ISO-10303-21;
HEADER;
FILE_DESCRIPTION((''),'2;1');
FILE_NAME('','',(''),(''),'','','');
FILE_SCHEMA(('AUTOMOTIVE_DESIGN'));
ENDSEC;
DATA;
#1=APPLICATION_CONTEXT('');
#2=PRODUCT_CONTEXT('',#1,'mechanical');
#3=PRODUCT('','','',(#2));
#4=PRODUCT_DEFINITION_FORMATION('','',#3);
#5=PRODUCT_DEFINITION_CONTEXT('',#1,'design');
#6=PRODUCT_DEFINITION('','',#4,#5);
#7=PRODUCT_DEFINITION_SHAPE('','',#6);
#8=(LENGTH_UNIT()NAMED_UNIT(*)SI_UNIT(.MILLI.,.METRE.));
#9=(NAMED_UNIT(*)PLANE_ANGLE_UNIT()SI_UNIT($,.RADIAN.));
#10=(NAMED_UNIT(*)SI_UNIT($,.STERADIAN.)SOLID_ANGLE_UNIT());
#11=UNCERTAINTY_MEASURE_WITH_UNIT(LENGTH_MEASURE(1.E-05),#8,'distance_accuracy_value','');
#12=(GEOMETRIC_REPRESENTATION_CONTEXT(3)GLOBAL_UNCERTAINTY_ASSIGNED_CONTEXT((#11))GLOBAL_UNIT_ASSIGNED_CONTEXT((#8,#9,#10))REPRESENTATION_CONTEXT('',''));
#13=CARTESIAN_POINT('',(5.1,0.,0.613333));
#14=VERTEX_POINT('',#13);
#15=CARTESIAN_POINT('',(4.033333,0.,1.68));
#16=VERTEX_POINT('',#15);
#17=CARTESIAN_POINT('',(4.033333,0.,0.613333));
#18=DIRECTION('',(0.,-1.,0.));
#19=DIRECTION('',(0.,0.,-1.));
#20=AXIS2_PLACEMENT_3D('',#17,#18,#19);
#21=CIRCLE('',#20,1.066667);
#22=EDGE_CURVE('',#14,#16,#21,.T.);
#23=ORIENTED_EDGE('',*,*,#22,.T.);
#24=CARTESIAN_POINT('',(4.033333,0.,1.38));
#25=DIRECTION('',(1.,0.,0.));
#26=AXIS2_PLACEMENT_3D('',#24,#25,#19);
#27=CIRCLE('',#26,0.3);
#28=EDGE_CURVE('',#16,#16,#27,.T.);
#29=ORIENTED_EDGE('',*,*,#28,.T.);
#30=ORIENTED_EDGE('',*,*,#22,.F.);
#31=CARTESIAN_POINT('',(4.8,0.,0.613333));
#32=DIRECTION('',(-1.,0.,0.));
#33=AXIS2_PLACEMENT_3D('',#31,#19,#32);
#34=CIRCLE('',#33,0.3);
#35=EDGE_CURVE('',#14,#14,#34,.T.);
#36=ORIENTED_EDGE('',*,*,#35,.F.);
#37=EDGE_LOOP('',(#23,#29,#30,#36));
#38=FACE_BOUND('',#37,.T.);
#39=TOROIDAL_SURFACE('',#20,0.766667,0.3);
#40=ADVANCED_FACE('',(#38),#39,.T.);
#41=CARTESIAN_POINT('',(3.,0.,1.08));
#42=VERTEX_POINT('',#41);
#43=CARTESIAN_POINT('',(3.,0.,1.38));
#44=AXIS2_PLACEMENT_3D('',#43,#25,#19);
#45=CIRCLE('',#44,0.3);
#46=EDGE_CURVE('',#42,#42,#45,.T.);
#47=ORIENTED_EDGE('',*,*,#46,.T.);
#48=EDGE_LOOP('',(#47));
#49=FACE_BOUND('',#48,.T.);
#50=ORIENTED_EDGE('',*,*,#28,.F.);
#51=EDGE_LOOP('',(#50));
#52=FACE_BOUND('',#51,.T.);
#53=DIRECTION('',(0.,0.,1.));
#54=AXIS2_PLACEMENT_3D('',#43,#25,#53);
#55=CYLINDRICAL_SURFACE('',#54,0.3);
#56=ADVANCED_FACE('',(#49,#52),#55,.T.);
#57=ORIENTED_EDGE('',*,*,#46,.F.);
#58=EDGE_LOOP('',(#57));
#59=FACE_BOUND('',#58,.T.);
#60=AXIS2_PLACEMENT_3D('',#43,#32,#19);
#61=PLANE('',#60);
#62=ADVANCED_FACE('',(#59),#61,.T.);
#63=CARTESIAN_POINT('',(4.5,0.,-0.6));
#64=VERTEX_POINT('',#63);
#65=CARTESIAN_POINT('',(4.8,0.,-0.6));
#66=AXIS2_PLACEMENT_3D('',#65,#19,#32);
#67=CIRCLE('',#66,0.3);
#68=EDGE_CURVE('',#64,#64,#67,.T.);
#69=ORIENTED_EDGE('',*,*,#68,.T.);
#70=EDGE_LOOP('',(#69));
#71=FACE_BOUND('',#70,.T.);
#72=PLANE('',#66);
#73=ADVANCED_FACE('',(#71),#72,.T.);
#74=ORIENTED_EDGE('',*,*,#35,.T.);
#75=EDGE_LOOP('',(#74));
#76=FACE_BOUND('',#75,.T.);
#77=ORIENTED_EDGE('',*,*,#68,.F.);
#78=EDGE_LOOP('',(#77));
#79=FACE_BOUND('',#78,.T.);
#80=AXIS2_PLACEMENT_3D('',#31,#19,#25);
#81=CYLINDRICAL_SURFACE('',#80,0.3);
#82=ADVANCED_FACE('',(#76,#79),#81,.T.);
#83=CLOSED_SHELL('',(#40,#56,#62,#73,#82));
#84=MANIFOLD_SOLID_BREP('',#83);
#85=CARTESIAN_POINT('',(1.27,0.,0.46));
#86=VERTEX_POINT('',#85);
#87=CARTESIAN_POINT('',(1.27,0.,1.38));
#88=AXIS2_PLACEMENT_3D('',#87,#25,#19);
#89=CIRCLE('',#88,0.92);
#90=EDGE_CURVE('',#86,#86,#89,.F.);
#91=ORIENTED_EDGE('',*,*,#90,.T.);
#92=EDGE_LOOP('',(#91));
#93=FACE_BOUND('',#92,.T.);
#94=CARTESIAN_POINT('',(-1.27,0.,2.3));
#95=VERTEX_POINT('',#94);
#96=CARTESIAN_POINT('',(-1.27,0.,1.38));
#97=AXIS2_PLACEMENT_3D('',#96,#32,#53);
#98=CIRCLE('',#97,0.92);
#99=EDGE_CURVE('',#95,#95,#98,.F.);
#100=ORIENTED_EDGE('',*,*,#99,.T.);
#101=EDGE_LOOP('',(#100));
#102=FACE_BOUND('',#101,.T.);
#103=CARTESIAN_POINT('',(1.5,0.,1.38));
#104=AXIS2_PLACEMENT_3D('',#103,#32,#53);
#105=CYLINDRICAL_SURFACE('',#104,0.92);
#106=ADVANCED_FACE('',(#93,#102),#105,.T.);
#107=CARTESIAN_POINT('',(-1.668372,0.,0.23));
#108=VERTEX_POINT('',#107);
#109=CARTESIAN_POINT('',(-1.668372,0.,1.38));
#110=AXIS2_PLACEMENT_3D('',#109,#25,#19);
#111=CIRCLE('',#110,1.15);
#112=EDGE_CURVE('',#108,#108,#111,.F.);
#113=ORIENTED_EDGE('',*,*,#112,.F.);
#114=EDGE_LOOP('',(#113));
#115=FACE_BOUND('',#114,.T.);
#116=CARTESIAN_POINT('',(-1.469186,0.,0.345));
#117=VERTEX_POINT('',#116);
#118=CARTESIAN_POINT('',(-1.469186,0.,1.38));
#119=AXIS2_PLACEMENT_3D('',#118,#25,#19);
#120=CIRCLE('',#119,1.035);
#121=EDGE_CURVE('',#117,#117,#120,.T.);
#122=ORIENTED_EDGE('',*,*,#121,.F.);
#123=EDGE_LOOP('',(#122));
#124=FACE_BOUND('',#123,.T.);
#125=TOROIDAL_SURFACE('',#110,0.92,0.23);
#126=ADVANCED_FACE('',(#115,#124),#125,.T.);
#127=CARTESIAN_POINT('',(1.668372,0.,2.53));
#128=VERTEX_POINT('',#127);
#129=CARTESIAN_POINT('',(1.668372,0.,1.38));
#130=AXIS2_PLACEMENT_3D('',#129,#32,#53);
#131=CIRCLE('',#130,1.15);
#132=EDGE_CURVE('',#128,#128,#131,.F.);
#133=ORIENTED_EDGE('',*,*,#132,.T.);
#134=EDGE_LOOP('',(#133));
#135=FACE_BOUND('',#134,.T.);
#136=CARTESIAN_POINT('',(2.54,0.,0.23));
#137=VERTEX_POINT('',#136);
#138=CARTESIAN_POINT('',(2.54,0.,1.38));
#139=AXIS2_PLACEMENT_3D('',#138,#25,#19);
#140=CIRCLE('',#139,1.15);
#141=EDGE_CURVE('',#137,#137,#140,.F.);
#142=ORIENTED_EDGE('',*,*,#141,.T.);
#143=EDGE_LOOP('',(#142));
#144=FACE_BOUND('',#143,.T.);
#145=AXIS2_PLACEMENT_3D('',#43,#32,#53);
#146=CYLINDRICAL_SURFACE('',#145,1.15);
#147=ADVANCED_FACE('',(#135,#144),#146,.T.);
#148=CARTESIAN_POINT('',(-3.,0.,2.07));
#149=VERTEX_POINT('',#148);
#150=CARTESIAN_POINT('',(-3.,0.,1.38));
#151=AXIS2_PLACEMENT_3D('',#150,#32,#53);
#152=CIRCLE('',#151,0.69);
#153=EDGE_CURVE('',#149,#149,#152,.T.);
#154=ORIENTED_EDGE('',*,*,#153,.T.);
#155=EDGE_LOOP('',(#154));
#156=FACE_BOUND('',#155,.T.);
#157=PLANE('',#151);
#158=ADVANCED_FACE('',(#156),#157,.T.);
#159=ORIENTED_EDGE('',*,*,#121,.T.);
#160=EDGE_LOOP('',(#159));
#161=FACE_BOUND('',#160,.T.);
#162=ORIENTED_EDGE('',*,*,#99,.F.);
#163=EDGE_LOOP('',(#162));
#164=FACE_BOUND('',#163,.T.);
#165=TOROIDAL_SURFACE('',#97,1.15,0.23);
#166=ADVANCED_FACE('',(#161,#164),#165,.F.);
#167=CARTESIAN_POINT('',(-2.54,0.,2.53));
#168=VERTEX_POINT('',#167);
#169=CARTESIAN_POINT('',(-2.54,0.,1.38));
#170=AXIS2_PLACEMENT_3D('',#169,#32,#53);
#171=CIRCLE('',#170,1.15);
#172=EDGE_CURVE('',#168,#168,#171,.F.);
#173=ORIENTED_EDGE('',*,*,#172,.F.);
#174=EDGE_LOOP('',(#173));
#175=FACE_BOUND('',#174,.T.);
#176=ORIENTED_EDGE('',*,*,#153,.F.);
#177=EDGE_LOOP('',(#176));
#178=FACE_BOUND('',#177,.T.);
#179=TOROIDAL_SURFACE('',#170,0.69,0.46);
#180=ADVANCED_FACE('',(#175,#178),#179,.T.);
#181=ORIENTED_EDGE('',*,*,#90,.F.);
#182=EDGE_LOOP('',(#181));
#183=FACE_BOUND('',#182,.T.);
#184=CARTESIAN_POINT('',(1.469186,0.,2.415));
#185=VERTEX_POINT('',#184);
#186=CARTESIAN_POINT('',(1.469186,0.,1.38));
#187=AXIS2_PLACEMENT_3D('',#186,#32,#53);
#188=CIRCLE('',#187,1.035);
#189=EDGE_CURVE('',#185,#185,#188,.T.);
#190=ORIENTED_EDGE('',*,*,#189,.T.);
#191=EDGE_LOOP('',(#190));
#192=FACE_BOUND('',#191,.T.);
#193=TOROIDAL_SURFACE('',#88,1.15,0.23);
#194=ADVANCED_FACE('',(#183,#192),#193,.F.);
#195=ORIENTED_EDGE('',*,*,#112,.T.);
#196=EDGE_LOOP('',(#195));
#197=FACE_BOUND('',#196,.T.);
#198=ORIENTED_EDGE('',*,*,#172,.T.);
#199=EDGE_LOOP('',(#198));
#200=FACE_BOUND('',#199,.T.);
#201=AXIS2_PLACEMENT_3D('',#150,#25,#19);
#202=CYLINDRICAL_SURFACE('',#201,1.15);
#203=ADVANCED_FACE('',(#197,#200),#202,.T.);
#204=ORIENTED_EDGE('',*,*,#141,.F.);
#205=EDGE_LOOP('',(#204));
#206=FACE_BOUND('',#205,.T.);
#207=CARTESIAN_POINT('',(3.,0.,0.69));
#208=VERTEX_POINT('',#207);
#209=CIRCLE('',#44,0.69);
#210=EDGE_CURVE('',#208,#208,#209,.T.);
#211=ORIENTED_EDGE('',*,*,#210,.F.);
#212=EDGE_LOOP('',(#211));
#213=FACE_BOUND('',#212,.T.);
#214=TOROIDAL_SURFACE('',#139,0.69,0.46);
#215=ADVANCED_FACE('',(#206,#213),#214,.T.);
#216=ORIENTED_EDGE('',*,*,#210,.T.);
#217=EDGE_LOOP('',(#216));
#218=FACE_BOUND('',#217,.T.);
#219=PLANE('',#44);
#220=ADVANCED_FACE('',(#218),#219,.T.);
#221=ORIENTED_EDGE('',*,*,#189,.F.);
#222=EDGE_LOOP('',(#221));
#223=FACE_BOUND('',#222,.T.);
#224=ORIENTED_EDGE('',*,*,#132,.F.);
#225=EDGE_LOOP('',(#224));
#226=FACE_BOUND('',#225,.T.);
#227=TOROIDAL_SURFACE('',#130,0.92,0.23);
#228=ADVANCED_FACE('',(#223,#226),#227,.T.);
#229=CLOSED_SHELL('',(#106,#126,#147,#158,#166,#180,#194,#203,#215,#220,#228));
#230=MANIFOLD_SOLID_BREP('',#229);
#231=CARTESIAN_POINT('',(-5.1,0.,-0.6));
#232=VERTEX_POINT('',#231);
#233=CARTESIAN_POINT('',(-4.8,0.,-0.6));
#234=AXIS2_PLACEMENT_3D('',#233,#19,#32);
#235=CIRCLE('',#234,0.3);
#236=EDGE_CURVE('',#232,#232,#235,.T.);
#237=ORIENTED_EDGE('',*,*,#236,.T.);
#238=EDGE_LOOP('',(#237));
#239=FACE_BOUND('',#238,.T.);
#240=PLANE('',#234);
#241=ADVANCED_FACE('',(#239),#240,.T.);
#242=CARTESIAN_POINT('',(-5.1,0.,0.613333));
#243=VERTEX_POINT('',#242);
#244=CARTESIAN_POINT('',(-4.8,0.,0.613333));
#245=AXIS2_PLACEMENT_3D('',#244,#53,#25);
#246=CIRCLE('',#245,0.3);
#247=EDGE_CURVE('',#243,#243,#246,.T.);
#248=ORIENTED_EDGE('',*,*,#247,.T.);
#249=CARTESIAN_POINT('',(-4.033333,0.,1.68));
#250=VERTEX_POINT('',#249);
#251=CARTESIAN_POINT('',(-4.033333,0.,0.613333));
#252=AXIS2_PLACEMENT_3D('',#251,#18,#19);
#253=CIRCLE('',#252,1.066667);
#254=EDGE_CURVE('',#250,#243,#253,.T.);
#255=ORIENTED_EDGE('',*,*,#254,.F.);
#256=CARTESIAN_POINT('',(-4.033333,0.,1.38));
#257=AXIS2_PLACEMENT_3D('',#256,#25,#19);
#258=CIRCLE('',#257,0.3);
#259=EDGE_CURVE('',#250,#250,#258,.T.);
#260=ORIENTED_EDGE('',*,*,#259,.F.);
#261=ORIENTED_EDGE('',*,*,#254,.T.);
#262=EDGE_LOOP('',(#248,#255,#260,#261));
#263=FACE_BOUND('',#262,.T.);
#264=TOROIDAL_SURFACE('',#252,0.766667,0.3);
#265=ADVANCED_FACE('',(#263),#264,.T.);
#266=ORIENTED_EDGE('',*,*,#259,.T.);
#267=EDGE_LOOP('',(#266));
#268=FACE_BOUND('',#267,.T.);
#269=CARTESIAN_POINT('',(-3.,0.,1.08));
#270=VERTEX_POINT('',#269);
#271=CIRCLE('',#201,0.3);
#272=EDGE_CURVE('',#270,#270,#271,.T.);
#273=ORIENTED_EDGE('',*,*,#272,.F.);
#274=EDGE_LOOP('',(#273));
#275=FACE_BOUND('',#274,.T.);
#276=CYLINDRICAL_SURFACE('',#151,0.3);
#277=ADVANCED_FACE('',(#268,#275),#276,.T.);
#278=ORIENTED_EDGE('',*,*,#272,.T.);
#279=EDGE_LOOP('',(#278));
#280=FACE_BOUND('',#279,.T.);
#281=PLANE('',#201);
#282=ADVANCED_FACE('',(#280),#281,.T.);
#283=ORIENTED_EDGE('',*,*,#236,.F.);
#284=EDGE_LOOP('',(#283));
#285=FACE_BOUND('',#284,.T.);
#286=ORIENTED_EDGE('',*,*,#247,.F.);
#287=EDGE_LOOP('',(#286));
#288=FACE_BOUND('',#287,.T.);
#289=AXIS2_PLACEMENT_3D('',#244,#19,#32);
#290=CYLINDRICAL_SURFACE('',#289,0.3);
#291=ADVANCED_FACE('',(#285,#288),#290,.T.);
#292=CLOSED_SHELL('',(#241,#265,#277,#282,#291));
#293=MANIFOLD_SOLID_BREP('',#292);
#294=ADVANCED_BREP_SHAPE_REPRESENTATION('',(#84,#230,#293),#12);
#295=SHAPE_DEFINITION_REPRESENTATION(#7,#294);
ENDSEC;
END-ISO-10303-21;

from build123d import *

# Parameters (mm, degrees)
EXTRUDE_START   = -1.5
SKETCH_3_R      = 0.92
EXTRUDE_1_DEPTH = 3
SKETCH_5_R      = 1.15
EXTRUDE_2_DEPTH = 1.5
EXTRUDE_START_2 = 1.5
SKETCH_7_R      = 1.15
EXTRUDE_3_DEPTH = 1.5
FILLET_1_R      = 0.46
FILLET_3_R      = 0.23
FILLET_4_R      = 0.23
SKETCH_1_R      = 0.3
SKETCH_32_R     = 0.3
EXTRUDE_4_DEPTH = 0.6


with BuildPart() as part:
    # Эскиз3 → Бобышка-Вытянуть1 (new body)
    with BuildSketch(Plane(origin=(0, 0, 0), x_dir=(0, 0, -1), z_dir=(1, 0, 0)).offset(EXTRUDE_START)):
        with Locations((-1.38, 0)):
            Circle(SKETCH_3_R)
    extrude(amount=EXTRUDE_1_DEPTH)

    # Эскиз5 → Бобышка-Вытянуть2 (add)
    with BuildSketch(Plane.ZY.offset(1.5)):
        with Locations((1.38, 0)):
            Circle(SKETCH_5_R)
    extrude(amount=EXTRUDE_2_DEPTH)

    # Эскиз7 → Бобышка-Вытянуть3 (add)
    with BuildSketch(Plane(origin=(1.5, 0, 0), x_dir=(0, 0, -1), z_dir=(1, 0, 0)).offset(EXTRUDE_START_2)):
        with Locations(Location((-1.38, 0, 0), (0, 0, 180))):
            Circle(SKETCH_7_R)
    extrude(amount=-EXTRUDE_3_DEPTH)

    # Скругление1
    fillet_1_edges = [part.edges().sort_by_distance(p)[0] for p in [
        (3, 0, 0.23),
        (-3, 0, 0.23),
    ]]
    fillet(fillet_1_edges, radius=FILLET_1_R)

    # Скругление3
    fillet_3_edges = [part.edges().sort_by_distance(p)[0] for p in [
        (1.5, 0, 2.3),
        (-1.5, 0, 2.3),
    ]]
    fillet(fillet_3_edges, radius=FILLET_3_R - 0.0001)  # a hair under: the kernel refuses the full size

    # Скругление4
    fillet_4_edges = [part.edges().sort_by_distance(p)[0] for p in [
        (-1.5, 0, 0.23),
        (1.5, 0, 0.23),
    ]]
    fillet(fillet_4_edges, radius=FILLET_4_R)


with BuildPart() as body_2:
    # По траектории8: sweep along a path in Эскиз10
    with BuildLine(Plane(origin=(0, 0, 0), x_dir=(1, 0, 0), z_dir=(0, 1, 0))) as sweep_8_path:
        Line((-4.8, 0), (-4.8, -0.613333333))
        ThreePointArc((-4.8, -0.613333333), (-4.575448532, -1.155448532), (-4.033333333, -1.38))
        Line((-4.033333333, -1.38), (-3, -1.38))
    # Эскиз1 → По траектории8 (sweep)
    with BuildSketch(Plane.XY):
        with Locations((-4.8, 0)):
            Circle(SKETCH_1_R)
    sweep(path=sweep_8_path.line)


with BuildPart() as body_3:
    # Зеркальное отражение1: mirrored copy
    add(body_2.part.mirror(Plane(origin=(0, 0, 0), x_dir=(0, 0, 1), z_dir=(1, 0, 0))))


with BuildPart() as body_2_1:
    add(body_2.part)

    add(body_3.part)  # Бобышка-Вытянуть4 merges body 3
    # Эскиз32 → Бобышка-Вытянуть4 (add)
    with BuildSketch(Plane(origin=(0, 0, 0), x_dir=(-1, 0, 0), z_dir=(0, 0, -1))):
        with Locations((4.8, 0)):
            Circle(SKETCH_32_R)
        with Locations(Location((-4.8, 0, 0), (0, 0, 180))):
            Circle(SKETCH_32_R)
    extrude(amount=EXTRUDE_4_DEPTH)


solid = Compound([part.part, body_2_1.part])
